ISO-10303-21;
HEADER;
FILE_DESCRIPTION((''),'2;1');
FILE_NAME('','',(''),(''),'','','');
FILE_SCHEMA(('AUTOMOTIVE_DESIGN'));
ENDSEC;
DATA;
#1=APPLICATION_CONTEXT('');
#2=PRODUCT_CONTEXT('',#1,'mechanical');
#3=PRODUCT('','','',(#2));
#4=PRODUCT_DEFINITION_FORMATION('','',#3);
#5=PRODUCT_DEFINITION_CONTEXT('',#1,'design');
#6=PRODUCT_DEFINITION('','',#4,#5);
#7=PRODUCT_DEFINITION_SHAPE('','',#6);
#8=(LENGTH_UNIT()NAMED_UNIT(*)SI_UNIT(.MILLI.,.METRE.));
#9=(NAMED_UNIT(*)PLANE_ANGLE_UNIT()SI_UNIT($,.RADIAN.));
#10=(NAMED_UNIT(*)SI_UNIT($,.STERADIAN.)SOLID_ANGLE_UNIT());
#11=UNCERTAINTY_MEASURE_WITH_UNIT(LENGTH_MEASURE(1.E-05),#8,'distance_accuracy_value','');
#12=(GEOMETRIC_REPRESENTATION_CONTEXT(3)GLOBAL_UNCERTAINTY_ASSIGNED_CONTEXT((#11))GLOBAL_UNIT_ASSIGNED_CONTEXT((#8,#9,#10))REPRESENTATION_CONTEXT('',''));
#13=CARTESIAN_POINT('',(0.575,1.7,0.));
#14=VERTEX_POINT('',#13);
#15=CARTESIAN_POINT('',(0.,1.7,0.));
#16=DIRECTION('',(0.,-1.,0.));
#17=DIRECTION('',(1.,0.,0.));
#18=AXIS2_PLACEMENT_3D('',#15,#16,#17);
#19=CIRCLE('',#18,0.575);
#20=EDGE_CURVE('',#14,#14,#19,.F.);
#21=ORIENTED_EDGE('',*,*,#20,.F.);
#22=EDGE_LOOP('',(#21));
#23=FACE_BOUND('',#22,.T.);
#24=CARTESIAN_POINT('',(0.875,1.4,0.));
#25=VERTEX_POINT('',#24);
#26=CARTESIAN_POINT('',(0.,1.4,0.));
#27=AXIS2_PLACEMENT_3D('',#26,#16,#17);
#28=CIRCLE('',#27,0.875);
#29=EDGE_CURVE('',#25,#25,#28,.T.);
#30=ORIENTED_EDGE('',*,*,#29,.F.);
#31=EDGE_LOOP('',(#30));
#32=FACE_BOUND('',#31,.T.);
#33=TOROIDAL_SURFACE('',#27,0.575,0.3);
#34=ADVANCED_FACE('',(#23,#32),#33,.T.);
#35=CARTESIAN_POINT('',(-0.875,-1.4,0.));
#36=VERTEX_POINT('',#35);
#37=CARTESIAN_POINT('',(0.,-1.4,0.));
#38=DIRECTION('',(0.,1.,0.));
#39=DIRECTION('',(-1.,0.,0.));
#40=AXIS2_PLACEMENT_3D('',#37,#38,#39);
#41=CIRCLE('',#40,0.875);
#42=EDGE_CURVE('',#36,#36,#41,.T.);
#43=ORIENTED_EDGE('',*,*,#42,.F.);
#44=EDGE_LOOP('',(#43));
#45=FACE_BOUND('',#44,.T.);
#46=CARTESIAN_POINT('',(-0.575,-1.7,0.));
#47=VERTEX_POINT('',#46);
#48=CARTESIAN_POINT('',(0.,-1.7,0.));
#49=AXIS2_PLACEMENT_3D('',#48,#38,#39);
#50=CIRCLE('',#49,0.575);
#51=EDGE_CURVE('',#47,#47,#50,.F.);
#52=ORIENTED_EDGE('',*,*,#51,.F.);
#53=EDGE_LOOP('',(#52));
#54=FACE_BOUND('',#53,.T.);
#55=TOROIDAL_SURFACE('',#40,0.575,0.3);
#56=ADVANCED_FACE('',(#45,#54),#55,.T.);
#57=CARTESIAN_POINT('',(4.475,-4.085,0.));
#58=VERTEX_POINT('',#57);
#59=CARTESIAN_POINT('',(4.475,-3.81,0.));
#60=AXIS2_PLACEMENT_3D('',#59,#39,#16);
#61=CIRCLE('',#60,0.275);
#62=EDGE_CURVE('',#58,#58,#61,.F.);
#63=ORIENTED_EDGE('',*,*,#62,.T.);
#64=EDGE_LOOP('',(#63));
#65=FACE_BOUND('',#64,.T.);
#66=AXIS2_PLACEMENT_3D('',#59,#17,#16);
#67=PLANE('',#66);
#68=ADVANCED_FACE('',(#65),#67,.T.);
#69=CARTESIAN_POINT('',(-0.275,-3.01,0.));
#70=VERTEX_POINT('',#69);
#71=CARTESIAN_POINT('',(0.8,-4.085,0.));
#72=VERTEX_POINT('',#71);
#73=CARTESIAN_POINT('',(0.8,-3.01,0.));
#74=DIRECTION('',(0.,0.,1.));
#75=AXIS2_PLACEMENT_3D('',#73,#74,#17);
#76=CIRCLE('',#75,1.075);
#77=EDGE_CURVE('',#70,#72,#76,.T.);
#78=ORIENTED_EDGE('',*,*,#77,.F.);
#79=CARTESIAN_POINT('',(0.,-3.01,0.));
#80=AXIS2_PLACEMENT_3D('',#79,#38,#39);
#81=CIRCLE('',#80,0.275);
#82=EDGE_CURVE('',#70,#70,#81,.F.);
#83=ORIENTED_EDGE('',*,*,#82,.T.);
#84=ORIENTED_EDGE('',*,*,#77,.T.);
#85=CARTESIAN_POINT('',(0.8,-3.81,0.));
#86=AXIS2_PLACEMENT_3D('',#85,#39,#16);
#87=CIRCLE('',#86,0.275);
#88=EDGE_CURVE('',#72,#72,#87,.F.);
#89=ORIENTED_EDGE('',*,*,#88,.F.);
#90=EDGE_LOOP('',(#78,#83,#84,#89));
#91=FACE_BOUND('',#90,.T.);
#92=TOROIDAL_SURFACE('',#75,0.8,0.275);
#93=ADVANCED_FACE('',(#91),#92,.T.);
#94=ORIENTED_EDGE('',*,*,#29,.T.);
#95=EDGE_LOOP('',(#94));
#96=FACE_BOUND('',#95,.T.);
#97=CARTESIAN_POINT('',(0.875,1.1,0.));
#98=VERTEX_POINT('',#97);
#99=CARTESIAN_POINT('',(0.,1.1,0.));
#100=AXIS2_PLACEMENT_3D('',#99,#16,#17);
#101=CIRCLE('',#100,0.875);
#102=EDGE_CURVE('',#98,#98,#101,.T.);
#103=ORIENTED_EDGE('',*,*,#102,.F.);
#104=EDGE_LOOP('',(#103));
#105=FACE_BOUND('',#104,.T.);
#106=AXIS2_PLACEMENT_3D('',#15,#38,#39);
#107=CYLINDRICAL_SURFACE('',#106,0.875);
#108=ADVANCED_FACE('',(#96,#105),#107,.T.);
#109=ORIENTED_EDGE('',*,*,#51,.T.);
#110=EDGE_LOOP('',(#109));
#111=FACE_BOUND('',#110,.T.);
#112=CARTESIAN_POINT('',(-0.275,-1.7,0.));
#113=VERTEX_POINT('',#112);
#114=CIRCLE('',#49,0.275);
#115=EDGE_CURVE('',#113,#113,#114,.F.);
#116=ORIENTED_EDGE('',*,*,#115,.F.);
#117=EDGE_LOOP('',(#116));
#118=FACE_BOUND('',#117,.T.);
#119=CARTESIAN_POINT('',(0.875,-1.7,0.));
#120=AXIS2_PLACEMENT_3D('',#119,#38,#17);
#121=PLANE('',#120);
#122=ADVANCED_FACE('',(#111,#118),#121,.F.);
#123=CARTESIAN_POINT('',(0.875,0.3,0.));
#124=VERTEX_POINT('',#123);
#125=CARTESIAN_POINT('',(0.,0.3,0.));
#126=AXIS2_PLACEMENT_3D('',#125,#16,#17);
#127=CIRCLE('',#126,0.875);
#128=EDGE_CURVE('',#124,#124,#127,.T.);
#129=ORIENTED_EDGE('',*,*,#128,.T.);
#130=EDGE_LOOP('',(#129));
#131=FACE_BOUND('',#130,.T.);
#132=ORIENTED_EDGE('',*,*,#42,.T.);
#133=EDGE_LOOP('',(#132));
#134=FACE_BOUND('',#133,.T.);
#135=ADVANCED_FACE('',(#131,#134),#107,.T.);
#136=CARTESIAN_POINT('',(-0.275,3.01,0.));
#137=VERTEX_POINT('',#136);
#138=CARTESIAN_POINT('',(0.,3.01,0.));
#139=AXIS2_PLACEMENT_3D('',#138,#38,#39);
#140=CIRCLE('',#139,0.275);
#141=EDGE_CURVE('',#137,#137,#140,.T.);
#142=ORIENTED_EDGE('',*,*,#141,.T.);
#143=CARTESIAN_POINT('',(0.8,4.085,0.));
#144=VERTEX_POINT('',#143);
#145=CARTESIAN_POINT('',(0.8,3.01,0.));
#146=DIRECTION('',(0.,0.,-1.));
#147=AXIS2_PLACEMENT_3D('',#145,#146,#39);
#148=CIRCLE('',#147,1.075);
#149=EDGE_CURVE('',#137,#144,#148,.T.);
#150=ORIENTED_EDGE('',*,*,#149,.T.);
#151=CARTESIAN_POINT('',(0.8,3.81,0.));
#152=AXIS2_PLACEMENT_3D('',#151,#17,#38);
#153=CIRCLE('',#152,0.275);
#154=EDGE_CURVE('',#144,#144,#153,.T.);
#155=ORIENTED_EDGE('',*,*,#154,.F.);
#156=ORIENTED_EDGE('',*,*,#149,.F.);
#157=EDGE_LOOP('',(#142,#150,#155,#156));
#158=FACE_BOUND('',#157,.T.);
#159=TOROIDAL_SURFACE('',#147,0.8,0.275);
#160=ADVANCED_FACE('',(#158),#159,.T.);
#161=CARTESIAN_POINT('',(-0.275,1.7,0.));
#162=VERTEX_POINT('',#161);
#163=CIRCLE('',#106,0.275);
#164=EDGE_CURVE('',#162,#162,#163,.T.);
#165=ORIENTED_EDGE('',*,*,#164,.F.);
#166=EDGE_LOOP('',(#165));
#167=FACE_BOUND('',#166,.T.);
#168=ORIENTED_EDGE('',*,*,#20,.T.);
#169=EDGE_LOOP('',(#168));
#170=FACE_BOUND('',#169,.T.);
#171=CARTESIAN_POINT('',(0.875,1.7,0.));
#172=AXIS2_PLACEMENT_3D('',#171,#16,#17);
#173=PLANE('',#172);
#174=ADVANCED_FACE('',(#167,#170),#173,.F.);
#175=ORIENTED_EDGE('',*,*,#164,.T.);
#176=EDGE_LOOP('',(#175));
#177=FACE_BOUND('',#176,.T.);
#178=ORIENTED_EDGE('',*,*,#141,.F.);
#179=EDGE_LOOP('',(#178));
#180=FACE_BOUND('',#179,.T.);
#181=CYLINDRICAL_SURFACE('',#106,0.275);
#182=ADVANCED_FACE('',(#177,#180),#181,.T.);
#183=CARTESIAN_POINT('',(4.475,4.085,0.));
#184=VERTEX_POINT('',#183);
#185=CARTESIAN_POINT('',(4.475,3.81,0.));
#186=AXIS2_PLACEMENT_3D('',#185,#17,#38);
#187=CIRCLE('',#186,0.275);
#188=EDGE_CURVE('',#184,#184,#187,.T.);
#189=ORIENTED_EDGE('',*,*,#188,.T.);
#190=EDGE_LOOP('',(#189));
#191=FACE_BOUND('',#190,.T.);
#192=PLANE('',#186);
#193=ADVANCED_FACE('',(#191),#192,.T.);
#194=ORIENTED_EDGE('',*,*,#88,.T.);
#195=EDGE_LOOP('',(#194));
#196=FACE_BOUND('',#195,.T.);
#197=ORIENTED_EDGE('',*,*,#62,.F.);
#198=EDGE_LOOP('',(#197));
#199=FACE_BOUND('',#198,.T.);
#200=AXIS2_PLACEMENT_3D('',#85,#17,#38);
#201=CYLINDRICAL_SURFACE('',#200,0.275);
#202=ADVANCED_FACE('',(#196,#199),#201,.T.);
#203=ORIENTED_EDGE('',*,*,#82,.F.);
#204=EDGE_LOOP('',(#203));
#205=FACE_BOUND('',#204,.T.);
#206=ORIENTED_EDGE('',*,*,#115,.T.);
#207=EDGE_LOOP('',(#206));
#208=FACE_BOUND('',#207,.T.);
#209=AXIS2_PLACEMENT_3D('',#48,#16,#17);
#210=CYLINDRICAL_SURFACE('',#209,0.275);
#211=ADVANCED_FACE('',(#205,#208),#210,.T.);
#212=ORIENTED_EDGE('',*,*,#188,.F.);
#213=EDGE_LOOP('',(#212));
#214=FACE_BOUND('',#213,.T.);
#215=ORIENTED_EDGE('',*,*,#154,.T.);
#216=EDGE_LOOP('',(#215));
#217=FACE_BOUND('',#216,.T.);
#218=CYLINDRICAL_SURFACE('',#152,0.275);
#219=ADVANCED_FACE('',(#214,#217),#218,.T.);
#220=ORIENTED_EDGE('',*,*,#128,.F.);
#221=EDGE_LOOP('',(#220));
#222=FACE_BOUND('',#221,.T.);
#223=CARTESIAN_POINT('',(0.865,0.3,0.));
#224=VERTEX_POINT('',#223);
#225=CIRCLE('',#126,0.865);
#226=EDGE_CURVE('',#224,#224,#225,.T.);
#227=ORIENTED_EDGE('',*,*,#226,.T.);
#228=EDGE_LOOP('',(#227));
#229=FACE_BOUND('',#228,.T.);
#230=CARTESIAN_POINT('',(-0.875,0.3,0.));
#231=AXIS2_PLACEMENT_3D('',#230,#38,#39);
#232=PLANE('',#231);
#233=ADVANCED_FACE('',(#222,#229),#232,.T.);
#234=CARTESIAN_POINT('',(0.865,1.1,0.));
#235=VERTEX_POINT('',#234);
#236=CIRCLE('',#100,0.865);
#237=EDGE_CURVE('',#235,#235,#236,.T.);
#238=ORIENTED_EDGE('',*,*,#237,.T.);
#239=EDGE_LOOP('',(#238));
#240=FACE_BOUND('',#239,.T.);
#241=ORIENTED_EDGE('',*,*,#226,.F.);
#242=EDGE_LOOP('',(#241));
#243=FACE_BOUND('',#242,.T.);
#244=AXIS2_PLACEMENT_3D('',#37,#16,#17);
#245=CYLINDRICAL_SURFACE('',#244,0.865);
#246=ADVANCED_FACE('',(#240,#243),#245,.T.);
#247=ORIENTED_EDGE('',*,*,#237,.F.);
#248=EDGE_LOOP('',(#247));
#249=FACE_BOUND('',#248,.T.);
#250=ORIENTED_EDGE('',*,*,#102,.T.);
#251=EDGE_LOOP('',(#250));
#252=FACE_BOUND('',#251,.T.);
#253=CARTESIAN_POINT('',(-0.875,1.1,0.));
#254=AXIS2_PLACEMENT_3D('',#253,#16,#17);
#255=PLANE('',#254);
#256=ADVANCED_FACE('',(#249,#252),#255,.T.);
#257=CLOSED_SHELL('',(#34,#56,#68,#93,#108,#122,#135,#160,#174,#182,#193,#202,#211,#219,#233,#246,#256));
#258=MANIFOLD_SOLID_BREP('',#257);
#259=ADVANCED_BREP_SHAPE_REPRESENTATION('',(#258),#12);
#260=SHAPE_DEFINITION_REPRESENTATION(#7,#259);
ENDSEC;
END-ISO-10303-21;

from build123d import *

# Parameters (mm, degrees)
ESQUISSE1_W           = 0.875
ESQUISSE1_H           = 1.7
CONG_1_R              = 0.3
ESQUISSE3_R           = 0.275
CONG_1_OF_SYM_TRIE1_R = 0.3
ESQUISSE4_W           = 0.01
ESQUISSE4_H           = 0.8


with BuildPart() as part:
    # Esquisse1 → Révolution1 (revolve)
    with BuildSketch(Plane.XY, mode=Mode.PRIVATE) as r_volution1_sk:
        with Locations((0.4375, 0.85)):
            Rectangle(ESQUISSE1_W, ESQUISSE1_H)
    r_volution1 = revolve(r_volution1_sk.sketch.rotate(Axis((0, 1.7, 0), (0, -1, 0)), 180), axis=Axis((0, 1.7, 0), (0, -1, 0)))

    # Congé1
    cong_1_edges = [part.edges().sort_by_distance(p)[0] for p in [
        (0.875, 1.7, 0),
    ]]
    fillet(cong_1_edges, radius=CONG_1_R)

    # Balayage1: sweep along a path in Esquisse2
    with BuildLine(Plane.XY) as balayage1_path:
        Line((0, 1.7), (0, 3.01))
        ThreePointArc((0, 3.01), (0.234314575, 3.575685425), (0.8, 3.81))
        Line((0.8, 3.81), (4.475, 3.81))
    # Esquisse3 → Balayage1 (sweep)
    with BuildSketch(Plane(origin=(0, 1.7, 0), x_dir=(1, 0, 0), z_dir=(0, 1, 0))):
        Circle(ESQUISSE3_R)
    balayage1 = sweep(path=balayage1_path.line)


with BuildPart() as sym_trie1_1:
    # Symétrie1: Révolution1, Balayage1 across Top Plane
    add(r_volution1.mirror(Plane(origin=(0, 0, 0), x_dir=(1, 0, 0), z_dir=(0, 1, 0))))
    add(balayage1.mirror(Plane(origin=(0, 0, 0), x_dir=(1, 0, 0), z_dir=(0, 1, 0))))

    # Congé1 of Symétrie1
    cong_1_of_sym_trie1_edges = [sym_trie1_1.edges().sort_by_distance(p)[0] for p in [
        (0.875, -1.7, 0),
    ]]
    fillet(cong_1_of_sym_trie1_edges, radius=CONG_1_OF_SYM_TRIE1_R)


with BuildPart() as part_1:
    add(part.part)

    # Symétrie1 united with what the copies to: union Symétrie1_1
    add(sym_trie1_1.part)

    # Esquisse4 → Enlèvement de matière-Révolution1 (revolve, cut)
    with BuildSketch(Plane.XY):
        with Locations((-0.87, 0.7)):
            Rectangle(ESQUISSE4_W, ESQUISSE4_H)
    revolve(axis=Axis((0, -1.4, 0), (0, 1, 0)), mode=Mode.SUBTRACT)


solid = part_1.part
